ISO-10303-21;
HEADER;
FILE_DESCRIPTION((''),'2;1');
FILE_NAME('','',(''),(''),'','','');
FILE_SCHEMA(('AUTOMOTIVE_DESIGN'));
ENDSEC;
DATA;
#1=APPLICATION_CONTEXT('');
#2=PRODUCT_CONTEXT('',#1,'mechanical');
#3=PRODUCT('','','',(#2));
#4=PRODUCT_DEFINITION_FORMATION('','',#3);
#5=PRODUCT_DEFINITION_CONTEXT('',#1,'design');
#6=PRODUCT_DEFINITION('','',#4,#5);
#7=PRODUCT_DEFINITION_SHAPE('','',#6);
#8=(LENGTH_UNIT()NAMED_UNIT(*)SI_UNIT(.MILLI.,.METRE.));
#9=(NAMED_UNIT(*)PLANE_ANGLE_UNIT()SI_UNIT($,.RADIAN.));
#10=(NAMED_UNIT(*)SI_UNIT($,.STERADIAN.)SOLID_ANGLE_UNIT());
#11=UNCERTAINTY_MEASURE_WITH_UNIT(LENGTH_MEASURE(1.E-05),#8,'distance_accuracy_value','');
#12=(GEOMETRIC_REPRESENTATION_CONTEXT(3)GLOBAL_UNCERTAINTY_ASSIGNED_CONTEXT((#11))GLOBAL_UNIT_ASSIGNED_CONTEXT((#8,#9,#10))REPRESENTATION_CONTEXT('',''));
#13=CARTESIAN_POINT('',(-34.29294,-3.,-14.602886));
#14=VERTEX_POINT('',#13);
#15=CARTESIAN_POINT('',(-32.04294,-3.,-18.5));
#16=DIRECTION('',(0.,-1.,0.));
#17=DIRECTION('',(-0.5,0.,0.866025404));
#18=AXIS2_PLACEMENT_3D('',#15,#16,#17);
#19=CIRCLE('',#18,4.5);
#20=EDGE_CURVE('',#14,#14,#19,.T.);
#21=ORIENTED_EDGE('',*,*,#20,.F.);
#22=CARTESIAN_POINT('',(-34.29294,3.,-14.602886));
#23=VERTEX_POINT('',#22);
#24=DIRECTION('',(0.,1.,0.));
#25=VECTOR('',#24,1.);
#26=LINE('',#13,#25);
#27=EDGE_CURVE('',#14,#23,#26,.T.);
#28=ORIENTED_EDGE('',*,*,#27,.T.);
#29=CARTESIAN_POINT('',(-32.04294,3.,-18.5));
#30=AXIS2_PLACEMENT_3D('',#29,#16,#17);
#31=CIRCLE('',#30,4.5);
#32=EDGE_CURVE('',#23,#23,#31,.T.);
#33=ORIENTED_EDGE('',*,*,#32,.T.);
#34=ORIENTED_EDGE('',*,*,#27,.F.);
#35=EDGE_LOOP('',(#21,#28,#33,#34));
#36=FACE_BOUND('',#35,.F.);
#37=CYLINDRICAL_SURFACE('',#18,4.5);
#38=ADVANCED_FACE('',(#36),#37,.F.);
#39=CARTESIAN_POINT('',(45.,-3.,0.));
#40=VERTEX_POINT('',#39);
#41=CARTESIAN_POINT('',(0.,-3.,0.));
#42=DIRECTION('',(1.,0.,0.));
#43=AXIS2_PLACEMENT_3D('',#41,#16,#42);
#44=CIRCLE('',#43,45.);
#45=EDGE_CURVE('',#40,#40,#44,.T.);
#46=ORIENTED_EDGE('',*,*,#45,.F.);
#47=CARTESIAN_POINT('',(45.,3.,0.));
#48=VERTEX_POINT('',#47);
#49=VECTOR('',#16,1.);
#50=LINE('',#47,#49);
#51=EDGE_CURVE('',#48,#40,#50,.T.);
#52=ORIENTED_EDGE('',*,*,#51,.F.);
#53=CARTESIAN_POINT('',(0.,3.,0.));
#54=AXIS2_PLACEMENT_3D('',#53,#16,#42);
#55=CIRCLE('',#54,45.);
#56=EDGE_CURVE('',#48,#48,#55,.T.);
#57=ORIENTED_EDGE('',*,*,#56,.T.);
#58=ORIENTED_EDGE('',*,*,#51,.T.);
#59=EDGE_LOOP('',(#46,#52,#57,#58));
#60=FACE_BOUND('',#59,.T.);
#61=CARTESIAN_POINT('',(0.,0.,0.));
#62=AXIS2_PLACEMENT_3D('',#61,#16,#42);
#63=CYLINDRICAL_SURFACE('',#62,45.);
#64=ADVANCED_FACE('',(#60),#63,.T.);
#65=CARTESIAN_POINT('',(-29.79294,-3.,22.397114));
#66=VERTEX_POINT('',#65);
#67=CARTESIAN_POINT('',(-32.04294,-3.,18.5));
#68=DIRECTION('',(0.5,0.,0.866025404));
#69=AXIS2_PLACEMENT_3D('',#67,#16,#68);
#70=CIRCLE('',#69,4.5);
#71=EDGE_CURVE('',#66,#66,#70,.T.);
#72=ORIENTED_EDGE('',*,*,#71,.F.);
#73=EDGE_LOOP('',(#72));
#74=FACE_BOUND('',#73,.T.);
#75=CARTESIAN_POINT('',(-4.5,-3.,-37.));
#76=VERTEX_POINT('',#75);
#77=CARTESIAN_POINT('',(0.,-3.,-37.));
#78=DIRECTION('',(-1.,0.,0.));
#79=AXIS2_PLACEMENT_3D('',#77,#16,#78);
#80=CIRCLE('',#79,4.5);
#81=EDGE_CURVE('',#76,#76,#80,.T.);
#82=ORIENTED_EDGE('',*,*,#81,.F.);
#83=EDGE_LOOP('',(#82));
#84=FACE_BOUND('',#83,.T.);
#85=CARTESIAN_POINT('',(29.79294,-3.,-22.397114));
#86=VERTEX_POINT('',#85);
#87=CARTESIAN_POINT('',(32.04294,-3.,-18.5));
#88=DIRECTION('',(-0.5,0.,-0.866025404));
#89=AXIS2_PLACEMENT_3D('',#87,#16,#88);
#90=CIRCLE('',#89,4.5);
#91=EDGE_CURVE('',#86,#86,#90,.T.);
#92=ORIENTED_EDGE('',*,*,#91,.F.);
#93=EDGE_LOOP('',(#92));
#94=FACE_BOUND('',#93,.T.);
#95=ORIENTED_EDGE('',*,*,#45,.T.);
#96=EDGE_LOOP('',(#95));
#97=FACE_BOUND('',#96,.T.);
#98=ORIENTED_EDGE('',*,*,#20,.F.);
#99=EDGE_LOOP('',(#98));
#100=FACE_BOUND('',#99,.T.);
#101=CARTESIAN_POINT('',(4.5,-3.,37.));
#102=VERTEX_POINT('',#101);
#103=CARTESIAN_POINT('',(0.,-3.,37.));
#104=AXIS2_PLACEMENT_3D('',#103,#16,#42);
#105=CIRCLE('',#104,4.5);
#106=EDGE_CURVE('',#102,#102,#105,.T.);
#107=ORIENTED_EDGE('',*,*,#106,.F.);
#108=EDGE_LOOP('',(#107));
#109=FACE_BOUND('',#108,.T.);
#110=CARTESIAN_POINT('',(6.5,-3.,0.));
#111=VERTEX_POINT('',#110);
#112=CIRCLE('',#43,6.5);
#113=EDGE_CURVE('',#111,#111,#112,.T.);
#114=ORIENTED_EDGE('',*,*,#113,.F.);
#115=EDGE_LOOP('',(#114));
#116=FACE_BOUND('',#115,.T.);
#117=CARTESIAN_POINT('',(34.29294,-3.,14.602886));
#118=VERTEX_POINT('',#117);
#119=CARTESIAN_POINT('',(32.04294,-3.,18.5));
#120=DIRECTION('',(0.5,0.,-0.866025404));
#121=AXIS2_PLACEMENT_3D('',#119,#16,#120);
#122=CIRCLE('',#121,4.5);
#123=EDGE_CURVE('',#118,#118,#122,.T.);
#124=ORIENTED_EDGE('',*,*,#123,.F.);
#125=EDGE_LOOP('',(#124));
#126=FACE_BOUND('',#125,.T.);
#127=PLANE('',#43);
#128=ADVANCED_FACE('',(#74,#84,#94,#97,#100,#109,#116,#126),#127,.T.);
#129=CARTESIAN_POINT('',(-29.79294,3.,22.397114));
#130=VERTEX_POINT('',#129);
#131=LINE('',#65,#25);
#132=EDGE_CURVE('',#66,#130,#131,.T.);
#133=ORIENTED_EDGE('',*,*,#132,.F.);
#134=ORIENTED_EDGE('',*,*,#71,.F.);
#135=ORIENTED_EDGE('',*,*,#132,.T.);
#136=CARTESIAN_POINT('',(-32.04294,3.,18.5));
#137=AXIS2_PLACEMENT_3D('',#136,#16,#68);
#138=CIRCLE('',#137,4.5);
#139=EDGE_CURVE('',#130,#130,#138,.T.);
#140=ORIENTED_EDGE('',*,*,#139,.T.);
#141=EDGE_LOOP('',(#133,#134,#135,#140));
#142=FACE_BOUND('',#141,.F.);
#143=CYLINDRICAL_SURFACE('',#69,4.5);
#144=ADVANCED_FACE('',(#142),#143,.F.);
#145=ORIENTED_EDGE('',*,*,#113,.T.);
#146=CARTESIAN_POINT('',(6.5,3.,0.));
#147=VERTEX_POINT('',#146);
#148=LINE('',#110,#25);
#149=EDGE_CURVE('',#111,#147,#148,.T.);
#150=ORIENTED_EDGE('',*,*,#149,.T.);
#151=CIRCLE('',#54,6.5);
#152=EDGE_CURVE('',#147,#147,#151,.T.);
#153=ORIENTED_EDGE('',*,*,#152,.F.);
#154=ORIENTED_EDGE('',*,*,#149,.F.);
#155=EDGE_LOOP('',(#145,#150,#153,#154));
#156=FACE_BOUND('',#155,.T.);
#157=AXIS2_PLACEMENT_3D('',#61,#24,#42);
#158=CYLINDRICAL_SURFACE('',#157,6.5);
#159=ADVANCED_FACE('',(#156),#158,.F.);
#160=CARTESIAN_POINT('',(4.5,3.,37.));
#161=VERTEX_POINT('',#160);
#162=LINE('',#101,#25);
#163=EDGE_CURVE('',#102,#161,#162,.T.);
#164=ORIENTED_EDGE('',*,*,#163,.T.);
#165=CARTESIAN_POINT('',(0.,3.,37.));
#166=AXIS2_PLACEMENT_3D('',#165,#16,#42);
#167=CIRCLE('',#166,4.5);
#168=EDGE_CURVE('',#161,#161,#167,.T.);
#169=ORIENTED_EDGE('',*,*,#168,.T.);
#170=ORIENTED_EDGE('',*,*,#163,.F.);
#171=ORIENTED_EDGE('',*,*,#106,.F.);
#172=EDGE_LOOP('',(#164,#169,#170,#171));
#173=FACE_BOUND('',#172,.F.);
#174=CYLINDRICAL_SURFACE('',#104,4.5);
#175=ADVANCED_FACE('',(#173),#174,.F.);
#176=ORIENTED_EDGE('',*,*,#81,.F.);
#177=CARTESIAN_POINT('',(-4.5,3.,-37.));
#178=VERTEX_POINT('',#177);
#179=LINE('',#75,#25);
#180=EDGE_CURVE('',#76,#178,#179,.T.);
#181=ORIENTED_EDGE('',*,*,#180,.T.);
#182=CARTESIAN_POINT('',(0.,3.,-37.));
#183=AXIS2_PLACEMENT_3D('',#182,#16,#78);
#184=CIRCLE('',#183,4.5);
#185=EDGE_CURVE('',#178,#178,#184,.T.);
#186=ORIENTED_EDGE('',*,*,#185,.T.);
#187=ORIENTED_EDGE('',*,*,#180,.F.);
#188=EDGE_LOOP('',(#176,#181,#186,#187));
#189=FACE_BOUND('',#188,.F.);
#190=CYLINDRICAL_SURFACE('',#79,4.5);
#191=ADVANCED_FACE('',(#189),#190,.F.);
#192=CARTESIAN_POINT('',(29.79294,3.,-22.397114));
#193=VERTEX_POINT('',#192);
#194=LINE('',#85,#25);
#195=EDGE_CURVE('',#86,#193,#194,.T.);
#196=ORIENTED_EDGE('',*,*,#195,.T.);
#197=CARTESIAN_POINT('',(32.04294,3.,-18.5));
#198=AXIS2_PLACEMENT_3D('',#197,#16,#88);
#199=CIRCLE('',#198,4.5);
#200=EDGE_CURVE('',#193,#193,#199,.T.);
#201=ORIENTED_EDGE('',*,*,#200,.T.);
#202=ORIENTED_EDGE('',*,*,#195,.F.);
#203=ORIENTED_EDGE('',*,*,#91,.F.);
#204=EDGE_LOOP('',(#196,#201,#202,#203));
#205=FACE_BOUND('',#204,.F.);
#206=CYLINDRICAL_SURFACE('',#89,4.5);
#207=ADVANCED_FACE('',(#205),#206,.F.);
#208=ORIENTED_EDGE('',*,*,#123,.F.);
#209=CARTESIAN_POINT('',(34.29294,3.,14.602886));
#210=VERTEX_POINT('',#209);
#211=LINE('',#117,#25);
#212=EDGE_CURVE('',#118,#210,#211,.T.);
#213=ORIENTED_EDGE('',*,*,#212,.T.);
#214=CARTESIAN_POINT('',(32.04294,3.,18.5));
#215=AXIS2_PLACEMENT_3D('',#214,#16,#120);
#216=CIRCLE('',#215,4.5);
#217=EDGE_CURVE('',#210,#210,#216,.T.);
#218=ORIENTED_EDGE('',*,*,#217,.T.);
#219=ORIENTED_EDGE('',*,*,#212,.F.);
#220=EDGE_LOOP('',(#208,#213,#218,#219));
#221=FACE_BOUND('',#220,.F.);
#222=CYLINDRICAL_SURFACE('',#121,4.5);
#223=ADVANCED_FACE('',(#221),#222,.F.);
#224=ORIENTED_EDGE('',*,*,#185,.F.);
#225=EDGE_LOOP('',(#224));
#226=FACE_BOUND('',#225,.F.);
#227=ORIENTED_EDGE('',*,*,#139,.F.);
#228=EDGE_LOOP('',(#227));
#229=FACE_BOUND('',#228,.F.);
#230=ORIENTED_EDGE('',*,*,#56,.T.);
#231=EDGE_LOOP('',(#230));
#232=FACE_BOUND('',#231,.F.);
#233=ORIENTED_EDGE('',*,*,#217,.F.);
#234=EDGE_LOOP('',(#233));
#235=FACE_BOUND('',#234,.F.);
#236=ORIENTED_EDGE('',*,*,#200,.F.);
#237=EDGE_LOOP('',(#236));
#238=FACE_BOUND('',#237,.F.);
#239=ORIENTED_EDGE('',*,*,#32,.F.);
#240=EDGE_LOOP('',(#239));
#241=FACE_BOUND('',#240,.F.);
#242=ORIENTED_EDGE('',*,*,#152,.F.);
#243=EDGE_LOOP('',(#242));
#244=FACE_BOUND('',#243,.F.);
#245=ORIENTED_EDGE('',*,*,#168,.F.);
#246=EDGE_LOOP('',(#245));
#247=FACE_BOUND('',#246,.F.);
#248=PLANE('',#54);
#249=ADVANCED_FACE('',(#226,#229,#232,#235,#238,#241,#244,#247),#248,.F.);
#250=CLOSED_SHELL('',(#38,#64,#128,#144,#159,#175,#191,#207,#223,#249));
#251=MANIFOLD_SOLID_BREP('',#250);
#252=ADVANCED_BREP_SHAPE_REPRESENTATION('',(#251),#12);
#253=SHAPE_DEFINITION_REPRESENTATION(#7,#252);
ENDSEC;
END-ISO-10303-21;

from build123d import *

# Parameters (mm, degrees)
F0_R            = 45
F0_R_2          = 6.5
F1_DEPTH        = 3
F2_R            = 4.5
F3_DEPTH        = 25
F3_COPIES_COUNT = 6


# Not quite as in the source:
# - a pattern or mirror of a feature is missing from the dataset's text; its kind, count and spacing are read off the source's solid


with BuildPart() as f1:
    # F0 (on Front) → F1 (new body, symmetric)
    with BuildSketch(Plane.XZ):
        Circle(F0_R)
        Circle(F0_R_2, mode=Mode.SUBTRACT)
    extrude(amount=F1_DEPTH, both=True)

    # F2 (on face) → F3 (cut)
    with BuildSketch(Plane.XZ.offset(3)):
        with Locations((0, 37)):
            Circle(F2_R)
    f3 = extrude(amount=-F3_DEPTH, mode=Mode.SUBTRACT)

    # F3_copies: F3 ×6 about axis
    f3_copies_axis = Axis((0, 0, 0), (0, 1, 0))
    for i in range(1, F3_COPIES_COUNT):
        add(f3.rotate(f3_copies_axis, i * 360 / F3_COPIES_COUNT), mode=Mode.SUBTRACT)


solid = f1.part
